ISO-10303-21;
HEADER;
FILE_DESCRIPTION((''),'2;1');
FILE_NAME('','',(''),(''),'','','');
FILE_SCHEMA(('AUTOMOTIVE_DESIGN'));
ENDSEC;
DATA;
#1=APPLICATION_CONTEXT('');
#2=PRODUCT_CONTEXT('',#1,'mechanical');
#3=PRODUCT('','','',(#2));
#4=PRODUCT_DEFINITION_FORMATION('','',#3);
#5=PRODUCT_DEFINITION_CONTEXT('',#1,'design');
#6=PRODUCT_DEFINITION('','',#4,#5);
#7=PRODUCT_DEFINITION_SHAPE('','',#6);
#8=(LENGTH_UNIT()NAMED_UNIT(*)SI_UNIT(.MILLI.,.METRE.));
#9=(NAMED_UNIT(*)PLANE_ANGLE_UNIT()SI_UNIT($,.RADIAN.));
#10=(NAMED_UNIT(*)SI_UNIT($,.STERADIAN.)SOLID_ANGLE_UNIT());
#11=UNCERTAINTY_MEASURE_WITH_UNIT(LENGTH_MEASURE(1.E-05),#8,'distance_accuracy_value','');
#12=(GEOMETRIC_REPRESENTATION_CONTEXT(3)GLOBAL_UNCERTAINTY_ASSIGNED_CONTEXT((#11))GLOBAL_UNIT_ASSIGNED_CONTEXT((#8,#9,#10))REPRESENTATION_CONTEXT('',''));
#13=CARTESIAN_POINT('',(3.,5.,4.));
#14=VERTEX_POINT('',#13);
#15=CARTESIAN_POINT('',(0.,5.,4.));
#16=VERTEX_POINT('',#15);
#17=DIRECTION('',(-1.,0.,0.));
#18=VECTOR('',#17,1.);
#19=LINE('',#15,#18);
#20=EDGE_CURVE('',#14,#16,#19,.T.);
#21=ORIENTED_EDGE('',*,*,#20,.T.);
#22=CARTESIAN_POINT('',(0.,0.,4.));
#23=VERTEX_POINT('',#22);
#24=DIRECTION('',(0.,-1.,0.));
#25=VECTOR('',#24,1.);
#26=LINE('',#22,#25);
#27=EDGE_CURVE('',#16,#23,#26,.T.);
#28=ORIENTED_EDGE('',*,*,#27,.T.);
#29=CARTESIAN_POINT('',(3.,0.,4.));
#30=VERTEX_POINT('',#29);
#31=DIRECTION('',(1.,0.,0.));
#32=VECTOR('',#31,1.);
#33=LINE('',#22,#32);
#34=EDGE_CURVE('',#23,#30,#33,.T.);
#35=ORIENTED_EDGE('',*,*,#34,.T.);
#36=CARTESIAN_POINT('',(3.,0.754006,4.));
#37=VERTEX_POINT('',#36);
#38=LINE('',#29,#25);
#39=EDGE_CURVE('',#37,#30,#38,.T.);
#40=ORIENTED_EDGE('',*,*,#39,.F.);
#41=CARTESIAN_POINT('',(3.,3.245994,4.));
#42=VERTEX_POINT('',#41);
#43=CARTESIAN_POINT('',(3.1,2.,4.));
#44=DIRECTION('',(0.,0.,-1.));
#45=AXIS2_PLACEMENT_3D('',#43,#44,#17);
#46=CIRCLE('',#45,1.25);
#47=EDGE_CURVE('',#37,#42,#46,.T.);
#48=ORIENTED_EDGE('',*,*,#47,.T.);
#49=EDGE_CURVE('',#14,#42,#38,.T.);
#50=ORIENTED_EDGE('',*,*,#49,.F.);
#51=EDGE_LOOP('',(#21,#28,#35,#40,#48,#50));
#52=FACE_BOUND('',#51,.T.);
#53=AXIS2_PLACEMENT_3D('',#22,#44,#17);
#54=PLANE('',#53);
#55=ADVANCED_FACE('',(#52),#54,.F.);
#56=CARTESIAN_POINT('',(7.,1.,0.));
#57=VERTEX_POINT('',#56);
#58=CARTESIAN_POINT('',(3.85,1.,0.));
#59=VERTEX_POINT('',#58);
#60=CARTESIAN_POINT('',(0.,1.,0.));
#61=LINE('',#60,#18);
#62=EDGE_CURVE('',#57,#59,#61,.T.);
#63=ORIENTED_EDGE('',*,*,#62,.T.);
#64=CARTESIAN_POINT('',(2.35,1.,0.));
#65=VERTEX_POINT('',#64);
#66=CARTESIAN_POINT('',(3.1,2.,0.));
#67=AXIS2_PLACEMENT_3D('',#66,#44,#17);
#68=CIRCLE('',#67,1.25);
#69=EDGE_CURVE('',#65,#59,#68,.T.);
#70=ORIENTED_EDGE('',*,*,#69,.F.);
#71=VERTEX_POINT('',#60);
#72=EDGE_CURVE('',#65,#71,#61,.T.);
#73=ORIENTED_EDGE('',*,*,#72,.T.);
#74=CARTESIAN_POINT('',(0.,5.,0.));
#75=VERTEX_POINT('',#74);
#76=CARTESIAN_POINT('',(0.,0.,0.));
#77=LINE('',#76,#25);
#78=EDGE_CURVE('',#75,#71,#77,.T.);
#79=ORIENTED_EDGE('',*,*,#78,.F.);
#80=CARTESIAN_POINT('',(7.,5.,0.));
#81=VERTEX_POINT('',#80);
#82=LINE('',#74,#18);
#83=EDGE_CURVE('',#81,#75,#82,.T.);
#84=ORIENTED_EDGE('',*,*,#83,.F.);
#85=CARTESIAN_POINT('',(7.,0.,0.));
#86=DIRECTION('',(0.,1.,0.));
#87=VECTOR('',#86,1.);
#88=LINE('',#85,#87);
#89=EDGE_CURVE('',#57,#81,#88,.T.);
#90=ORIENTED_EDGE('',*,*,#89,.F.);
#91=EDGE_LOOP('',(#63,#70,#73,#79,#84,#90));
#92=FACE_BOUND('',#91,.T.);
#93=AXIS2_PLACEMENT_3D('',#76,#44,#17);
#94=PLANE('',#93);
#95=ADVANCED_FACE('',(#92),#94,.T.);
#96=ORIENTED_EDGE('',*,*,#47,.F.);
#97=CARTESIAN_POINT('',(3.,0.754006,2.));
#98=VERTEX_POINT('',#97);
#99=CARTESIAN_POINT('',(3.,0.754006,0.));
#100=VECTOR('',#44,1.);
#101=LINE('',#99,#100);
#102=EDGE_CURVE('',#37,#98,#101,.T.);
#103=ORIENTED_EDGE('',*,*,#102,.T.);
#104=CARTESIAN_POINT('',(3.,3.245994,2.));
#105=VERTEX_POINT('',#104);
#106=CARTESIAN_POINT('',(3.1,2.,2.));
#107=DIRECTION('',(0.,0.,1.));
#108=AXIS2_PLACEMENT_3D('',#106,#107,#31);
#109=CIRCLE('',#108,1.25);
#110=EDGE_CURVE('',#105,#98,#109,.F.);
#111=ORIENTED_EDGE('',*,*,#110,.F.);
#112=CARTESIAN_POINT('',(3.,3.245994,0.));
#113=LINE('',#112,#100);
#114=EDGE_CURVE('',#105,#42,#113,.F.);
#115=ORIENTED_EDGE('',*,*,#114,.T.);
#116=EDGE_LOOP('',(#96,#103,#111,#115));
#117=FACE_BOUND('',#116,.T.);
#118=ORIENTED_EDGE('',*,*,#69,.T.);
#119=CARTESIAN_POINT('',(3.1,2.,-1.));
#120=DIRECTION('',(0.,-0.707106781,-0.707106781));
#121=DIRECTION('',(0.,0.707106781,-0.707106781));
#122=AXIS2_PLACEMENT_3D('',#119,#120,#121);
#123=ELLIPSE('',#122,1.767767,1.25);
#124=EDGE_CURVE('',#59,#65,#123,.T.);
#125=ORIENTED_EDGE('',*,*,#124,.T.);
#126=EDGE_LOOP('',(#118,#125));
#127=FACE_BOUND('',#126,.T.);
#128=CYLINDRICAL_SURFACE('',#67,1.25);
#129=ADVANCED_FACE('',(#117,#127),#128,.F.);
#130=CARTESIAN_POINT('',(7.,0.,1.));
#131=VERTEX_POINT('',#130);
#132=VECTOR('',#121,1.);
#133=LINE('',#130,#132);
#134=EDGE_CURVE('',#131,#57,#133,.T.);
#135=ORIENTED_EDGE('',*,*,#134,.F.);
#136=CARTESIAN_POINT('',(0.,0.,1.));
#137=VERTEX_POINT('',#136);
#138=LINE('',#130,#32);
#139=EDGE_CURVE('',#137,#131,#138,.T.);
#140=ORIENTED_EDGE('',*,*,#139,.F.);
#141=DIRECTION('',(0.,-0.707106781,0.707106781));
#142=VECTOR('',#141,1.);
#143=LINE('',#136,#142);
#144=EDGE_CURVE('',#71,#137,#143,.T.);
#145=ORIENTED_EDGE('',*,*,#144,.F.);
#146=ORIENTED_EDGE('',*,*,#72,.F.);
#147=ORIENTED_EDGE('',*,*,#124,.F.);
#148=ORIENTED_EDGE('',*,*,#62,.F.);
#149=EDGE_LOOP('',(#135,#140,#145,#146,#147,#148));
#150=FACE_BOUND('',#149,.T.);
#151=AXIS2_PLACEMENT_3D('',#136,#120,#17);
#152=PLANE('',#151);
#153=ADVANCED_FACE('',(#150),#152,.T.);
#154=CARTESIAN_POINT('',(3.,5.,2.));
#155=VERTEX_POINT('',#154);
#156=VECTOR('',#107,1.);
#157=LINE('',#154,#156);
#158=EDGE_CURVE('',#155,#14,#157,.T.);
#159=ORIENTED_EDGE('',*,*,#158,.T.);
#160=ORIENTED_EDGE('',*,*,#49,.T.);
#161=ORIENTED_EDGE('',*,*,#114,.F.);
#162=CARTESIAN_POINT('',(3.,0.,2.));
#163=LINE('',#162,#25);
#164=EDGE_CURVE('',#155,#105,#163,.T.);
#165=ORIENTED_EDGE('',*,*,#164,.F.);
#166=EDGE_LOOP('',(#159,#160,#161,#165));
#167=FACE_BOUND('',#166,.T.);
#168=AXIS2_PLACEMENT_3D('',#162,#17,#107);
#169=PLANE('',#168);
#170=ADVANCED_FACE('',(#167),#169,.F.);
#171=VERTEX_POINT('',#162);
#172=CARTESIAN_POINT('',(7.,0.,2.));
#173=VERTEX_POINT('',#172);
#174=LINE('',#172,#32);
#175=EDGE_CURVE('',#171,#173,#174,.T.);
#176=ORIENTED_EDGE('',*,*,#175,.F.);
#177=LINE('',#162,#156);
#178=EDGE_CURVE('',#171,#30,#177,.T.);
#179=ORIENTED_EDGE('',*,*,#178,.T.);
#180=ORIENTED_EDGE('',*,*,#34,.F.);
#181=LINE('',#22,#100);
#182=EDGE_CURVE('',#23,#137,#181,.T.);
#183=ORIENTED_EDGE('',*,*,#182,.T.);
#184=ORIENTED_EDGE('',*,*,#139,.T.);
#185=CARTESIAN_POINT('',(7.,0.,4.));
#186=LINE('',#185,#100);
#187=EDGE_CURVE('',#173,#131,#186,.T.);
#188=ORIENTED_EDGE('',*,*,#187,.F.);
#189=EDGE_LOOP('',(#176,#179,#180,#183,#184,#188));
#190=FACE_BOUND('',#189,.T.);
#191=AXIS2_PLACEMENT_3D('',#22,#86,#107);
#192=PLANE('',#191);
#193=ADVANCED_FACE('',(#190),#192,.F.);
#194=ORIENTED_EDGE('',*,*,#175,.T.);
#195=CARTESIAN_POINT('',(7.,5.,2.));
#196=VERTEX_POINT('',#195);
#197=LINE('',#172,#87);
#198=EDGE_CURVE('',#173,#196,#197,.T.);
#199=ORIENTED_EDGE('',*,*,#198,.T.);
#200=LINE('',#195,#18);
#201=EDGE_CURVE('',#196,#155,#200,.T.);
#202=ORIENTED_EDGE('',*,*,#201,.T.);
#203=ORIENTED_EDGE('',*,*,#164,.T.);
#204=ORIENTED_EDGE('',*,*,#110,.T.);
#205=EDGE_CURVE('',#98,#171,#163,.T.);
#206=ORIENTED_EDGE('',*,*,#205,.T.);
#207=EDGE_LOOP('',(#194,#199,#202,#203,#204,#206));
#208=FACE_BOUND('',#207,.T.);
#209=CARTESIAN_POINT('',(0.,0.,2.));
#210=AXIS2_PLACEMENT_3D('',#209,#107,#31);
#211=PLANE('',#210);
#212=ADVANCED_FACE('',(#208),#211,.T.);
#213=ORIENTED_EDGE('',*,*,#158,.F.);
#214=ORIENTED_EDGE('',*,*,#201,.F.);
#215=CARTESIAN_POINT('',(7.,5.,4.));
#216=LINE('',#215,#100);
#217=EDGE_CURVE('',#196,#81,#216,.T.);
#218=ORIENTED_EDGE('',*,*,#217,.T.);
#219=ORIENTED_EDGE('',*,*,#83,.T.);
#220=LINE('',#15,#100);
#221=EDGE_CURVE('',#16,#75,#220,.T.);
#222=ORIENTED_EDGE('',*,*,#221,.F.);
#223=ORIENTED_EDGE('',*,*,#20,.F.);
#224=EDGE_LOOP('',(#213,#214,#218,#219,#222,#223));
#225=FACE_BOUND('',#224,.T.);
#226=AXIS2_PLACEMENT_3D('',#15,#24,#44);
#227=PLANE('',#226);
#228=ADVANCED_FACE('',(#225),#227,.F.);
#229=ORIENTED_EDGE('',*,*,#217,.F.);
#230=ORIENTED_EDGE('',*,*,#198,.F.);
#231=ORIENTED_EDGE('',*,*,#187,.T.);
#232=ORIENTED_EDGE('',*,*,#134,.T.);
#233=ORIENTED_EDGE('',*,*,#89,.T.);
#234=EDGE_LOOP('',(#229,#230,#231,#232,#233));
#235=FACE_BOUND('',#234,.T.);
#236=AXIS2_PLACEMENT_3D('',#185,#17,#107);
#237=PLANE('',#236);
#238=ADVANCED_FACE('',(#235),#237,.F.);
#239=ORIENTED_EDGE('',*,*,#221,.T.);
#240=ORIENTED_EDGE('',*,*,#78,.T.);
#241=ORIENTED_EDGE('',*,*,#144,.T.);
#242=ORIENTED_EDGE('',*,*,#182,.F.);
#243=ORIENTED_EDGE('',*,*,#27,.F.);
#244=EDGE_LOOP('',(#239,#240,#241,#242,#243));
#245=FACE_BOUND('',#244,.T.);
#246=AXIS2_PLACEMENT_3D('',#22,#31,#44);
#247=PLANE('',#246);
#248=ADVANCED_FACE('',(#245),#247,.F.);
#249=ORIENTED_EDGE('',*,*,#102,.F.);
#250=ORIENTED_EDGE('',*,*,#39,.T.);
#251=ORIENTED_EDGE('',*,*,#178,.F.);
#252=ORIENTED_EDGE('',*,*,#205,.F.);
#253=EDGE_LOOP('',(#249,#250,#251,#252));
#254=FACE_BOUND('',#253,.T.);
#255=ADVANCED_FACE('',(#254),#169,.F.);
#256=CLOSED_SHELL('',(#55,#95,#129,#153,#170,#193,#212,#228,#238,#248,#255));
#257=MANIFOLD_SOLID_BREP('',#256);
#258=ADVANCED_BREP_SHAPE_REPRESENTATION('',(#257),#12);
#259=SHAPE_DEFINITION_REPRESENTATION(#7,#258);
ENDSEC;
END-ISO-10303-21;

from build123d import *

# Parameters (mm, degrees)
SKETCH1_W                 = 7
SKETCH1_H                 = 5
BOSS_EXTRUDE1_DEPTH       = 4
M3X0_5_TAPPED_HOLE1_D     = 2.5
M3X0_5_TAPPED_HOLE1_DEPTH = 8.5
M3X0_5_TAPPED_HOLE1_TIP   = 0.751075774
SKETCH6_W                 = 4
SKETCH6_H                 = 5
CUT_EXTRUDE1_DEPTH        = 2
CHAMFER1_SIZE             = 1


with BuildPart() as part:
    # Sketch1 → Boss-Extrude1 (new body)
    with BuildSketch(Plane.XY):
        with Locations((3.5, 2.5)):
            Rectangle(SKETCH1_W, SKETCH1_H)
    extrude(amount=BOSS_EXTRUDE1_DEPTH)

    # M3x0.5 Tapped Hole1
    with Locations(Plane(origin=(0, 0, 0), x_dir=(-1, 0, 0), z_dir=(0, 0, -1))):
        with Locations((-3.1, 2)):
            Hole(M3X0_5_TAPPED_HOLE1_D / 2, depth=M3X0_5_TAPPED_HOLE1_DEPTH)
            with Locations((0, 0, -(M3X0_5_TAPPED_HOLE1_DEPTH + M3X0_5_TAPPED_HOLE1_TIP / 2))):  # 118° drill point
                Cone(0, M3X0_5_TAPPED_HOLE1_D / 2, M3X0_5_TAPPED_HOLE1_TIP, mode=Mode.SUBTRACT)

    # Sketch6 → Cut-Extrude1 (cut)
    with BuildSketch(Plane.XY.offset(4)):
        with Locations((5, 2.5)):
            Rectangle(SKETCH6_W, SKETCH6_H)
    extrude(amount=-CUT_EXTRUDE1_DEPTH, mode=Mode.SUBTRACT)

    # Chamfer1
    # the kernel refuses this chamfer: 1 mm, written as the material it takes off along each edge
    with BuildSketch(Plane(origin=(-2.571682988, 0, 0), x_dir=(0, -0.027495876610586372, 0.9996219169112968), z_dir=(1, 0, 0))) as chamfer1_piece_1:
        Polygon((CHAMFER1_SIZE * 0.999621916911, -CHAMFER1_SIZE * 0.0274958766106), (-CHAMFER1_SIZE * 0.0274958766106, -CHAMFER1_SIZE * 0.999621916911), (0, 0), align=None)
    extrude(amount=12.143365976, mode=Mode.SUBTRACT)


solid = part.part
